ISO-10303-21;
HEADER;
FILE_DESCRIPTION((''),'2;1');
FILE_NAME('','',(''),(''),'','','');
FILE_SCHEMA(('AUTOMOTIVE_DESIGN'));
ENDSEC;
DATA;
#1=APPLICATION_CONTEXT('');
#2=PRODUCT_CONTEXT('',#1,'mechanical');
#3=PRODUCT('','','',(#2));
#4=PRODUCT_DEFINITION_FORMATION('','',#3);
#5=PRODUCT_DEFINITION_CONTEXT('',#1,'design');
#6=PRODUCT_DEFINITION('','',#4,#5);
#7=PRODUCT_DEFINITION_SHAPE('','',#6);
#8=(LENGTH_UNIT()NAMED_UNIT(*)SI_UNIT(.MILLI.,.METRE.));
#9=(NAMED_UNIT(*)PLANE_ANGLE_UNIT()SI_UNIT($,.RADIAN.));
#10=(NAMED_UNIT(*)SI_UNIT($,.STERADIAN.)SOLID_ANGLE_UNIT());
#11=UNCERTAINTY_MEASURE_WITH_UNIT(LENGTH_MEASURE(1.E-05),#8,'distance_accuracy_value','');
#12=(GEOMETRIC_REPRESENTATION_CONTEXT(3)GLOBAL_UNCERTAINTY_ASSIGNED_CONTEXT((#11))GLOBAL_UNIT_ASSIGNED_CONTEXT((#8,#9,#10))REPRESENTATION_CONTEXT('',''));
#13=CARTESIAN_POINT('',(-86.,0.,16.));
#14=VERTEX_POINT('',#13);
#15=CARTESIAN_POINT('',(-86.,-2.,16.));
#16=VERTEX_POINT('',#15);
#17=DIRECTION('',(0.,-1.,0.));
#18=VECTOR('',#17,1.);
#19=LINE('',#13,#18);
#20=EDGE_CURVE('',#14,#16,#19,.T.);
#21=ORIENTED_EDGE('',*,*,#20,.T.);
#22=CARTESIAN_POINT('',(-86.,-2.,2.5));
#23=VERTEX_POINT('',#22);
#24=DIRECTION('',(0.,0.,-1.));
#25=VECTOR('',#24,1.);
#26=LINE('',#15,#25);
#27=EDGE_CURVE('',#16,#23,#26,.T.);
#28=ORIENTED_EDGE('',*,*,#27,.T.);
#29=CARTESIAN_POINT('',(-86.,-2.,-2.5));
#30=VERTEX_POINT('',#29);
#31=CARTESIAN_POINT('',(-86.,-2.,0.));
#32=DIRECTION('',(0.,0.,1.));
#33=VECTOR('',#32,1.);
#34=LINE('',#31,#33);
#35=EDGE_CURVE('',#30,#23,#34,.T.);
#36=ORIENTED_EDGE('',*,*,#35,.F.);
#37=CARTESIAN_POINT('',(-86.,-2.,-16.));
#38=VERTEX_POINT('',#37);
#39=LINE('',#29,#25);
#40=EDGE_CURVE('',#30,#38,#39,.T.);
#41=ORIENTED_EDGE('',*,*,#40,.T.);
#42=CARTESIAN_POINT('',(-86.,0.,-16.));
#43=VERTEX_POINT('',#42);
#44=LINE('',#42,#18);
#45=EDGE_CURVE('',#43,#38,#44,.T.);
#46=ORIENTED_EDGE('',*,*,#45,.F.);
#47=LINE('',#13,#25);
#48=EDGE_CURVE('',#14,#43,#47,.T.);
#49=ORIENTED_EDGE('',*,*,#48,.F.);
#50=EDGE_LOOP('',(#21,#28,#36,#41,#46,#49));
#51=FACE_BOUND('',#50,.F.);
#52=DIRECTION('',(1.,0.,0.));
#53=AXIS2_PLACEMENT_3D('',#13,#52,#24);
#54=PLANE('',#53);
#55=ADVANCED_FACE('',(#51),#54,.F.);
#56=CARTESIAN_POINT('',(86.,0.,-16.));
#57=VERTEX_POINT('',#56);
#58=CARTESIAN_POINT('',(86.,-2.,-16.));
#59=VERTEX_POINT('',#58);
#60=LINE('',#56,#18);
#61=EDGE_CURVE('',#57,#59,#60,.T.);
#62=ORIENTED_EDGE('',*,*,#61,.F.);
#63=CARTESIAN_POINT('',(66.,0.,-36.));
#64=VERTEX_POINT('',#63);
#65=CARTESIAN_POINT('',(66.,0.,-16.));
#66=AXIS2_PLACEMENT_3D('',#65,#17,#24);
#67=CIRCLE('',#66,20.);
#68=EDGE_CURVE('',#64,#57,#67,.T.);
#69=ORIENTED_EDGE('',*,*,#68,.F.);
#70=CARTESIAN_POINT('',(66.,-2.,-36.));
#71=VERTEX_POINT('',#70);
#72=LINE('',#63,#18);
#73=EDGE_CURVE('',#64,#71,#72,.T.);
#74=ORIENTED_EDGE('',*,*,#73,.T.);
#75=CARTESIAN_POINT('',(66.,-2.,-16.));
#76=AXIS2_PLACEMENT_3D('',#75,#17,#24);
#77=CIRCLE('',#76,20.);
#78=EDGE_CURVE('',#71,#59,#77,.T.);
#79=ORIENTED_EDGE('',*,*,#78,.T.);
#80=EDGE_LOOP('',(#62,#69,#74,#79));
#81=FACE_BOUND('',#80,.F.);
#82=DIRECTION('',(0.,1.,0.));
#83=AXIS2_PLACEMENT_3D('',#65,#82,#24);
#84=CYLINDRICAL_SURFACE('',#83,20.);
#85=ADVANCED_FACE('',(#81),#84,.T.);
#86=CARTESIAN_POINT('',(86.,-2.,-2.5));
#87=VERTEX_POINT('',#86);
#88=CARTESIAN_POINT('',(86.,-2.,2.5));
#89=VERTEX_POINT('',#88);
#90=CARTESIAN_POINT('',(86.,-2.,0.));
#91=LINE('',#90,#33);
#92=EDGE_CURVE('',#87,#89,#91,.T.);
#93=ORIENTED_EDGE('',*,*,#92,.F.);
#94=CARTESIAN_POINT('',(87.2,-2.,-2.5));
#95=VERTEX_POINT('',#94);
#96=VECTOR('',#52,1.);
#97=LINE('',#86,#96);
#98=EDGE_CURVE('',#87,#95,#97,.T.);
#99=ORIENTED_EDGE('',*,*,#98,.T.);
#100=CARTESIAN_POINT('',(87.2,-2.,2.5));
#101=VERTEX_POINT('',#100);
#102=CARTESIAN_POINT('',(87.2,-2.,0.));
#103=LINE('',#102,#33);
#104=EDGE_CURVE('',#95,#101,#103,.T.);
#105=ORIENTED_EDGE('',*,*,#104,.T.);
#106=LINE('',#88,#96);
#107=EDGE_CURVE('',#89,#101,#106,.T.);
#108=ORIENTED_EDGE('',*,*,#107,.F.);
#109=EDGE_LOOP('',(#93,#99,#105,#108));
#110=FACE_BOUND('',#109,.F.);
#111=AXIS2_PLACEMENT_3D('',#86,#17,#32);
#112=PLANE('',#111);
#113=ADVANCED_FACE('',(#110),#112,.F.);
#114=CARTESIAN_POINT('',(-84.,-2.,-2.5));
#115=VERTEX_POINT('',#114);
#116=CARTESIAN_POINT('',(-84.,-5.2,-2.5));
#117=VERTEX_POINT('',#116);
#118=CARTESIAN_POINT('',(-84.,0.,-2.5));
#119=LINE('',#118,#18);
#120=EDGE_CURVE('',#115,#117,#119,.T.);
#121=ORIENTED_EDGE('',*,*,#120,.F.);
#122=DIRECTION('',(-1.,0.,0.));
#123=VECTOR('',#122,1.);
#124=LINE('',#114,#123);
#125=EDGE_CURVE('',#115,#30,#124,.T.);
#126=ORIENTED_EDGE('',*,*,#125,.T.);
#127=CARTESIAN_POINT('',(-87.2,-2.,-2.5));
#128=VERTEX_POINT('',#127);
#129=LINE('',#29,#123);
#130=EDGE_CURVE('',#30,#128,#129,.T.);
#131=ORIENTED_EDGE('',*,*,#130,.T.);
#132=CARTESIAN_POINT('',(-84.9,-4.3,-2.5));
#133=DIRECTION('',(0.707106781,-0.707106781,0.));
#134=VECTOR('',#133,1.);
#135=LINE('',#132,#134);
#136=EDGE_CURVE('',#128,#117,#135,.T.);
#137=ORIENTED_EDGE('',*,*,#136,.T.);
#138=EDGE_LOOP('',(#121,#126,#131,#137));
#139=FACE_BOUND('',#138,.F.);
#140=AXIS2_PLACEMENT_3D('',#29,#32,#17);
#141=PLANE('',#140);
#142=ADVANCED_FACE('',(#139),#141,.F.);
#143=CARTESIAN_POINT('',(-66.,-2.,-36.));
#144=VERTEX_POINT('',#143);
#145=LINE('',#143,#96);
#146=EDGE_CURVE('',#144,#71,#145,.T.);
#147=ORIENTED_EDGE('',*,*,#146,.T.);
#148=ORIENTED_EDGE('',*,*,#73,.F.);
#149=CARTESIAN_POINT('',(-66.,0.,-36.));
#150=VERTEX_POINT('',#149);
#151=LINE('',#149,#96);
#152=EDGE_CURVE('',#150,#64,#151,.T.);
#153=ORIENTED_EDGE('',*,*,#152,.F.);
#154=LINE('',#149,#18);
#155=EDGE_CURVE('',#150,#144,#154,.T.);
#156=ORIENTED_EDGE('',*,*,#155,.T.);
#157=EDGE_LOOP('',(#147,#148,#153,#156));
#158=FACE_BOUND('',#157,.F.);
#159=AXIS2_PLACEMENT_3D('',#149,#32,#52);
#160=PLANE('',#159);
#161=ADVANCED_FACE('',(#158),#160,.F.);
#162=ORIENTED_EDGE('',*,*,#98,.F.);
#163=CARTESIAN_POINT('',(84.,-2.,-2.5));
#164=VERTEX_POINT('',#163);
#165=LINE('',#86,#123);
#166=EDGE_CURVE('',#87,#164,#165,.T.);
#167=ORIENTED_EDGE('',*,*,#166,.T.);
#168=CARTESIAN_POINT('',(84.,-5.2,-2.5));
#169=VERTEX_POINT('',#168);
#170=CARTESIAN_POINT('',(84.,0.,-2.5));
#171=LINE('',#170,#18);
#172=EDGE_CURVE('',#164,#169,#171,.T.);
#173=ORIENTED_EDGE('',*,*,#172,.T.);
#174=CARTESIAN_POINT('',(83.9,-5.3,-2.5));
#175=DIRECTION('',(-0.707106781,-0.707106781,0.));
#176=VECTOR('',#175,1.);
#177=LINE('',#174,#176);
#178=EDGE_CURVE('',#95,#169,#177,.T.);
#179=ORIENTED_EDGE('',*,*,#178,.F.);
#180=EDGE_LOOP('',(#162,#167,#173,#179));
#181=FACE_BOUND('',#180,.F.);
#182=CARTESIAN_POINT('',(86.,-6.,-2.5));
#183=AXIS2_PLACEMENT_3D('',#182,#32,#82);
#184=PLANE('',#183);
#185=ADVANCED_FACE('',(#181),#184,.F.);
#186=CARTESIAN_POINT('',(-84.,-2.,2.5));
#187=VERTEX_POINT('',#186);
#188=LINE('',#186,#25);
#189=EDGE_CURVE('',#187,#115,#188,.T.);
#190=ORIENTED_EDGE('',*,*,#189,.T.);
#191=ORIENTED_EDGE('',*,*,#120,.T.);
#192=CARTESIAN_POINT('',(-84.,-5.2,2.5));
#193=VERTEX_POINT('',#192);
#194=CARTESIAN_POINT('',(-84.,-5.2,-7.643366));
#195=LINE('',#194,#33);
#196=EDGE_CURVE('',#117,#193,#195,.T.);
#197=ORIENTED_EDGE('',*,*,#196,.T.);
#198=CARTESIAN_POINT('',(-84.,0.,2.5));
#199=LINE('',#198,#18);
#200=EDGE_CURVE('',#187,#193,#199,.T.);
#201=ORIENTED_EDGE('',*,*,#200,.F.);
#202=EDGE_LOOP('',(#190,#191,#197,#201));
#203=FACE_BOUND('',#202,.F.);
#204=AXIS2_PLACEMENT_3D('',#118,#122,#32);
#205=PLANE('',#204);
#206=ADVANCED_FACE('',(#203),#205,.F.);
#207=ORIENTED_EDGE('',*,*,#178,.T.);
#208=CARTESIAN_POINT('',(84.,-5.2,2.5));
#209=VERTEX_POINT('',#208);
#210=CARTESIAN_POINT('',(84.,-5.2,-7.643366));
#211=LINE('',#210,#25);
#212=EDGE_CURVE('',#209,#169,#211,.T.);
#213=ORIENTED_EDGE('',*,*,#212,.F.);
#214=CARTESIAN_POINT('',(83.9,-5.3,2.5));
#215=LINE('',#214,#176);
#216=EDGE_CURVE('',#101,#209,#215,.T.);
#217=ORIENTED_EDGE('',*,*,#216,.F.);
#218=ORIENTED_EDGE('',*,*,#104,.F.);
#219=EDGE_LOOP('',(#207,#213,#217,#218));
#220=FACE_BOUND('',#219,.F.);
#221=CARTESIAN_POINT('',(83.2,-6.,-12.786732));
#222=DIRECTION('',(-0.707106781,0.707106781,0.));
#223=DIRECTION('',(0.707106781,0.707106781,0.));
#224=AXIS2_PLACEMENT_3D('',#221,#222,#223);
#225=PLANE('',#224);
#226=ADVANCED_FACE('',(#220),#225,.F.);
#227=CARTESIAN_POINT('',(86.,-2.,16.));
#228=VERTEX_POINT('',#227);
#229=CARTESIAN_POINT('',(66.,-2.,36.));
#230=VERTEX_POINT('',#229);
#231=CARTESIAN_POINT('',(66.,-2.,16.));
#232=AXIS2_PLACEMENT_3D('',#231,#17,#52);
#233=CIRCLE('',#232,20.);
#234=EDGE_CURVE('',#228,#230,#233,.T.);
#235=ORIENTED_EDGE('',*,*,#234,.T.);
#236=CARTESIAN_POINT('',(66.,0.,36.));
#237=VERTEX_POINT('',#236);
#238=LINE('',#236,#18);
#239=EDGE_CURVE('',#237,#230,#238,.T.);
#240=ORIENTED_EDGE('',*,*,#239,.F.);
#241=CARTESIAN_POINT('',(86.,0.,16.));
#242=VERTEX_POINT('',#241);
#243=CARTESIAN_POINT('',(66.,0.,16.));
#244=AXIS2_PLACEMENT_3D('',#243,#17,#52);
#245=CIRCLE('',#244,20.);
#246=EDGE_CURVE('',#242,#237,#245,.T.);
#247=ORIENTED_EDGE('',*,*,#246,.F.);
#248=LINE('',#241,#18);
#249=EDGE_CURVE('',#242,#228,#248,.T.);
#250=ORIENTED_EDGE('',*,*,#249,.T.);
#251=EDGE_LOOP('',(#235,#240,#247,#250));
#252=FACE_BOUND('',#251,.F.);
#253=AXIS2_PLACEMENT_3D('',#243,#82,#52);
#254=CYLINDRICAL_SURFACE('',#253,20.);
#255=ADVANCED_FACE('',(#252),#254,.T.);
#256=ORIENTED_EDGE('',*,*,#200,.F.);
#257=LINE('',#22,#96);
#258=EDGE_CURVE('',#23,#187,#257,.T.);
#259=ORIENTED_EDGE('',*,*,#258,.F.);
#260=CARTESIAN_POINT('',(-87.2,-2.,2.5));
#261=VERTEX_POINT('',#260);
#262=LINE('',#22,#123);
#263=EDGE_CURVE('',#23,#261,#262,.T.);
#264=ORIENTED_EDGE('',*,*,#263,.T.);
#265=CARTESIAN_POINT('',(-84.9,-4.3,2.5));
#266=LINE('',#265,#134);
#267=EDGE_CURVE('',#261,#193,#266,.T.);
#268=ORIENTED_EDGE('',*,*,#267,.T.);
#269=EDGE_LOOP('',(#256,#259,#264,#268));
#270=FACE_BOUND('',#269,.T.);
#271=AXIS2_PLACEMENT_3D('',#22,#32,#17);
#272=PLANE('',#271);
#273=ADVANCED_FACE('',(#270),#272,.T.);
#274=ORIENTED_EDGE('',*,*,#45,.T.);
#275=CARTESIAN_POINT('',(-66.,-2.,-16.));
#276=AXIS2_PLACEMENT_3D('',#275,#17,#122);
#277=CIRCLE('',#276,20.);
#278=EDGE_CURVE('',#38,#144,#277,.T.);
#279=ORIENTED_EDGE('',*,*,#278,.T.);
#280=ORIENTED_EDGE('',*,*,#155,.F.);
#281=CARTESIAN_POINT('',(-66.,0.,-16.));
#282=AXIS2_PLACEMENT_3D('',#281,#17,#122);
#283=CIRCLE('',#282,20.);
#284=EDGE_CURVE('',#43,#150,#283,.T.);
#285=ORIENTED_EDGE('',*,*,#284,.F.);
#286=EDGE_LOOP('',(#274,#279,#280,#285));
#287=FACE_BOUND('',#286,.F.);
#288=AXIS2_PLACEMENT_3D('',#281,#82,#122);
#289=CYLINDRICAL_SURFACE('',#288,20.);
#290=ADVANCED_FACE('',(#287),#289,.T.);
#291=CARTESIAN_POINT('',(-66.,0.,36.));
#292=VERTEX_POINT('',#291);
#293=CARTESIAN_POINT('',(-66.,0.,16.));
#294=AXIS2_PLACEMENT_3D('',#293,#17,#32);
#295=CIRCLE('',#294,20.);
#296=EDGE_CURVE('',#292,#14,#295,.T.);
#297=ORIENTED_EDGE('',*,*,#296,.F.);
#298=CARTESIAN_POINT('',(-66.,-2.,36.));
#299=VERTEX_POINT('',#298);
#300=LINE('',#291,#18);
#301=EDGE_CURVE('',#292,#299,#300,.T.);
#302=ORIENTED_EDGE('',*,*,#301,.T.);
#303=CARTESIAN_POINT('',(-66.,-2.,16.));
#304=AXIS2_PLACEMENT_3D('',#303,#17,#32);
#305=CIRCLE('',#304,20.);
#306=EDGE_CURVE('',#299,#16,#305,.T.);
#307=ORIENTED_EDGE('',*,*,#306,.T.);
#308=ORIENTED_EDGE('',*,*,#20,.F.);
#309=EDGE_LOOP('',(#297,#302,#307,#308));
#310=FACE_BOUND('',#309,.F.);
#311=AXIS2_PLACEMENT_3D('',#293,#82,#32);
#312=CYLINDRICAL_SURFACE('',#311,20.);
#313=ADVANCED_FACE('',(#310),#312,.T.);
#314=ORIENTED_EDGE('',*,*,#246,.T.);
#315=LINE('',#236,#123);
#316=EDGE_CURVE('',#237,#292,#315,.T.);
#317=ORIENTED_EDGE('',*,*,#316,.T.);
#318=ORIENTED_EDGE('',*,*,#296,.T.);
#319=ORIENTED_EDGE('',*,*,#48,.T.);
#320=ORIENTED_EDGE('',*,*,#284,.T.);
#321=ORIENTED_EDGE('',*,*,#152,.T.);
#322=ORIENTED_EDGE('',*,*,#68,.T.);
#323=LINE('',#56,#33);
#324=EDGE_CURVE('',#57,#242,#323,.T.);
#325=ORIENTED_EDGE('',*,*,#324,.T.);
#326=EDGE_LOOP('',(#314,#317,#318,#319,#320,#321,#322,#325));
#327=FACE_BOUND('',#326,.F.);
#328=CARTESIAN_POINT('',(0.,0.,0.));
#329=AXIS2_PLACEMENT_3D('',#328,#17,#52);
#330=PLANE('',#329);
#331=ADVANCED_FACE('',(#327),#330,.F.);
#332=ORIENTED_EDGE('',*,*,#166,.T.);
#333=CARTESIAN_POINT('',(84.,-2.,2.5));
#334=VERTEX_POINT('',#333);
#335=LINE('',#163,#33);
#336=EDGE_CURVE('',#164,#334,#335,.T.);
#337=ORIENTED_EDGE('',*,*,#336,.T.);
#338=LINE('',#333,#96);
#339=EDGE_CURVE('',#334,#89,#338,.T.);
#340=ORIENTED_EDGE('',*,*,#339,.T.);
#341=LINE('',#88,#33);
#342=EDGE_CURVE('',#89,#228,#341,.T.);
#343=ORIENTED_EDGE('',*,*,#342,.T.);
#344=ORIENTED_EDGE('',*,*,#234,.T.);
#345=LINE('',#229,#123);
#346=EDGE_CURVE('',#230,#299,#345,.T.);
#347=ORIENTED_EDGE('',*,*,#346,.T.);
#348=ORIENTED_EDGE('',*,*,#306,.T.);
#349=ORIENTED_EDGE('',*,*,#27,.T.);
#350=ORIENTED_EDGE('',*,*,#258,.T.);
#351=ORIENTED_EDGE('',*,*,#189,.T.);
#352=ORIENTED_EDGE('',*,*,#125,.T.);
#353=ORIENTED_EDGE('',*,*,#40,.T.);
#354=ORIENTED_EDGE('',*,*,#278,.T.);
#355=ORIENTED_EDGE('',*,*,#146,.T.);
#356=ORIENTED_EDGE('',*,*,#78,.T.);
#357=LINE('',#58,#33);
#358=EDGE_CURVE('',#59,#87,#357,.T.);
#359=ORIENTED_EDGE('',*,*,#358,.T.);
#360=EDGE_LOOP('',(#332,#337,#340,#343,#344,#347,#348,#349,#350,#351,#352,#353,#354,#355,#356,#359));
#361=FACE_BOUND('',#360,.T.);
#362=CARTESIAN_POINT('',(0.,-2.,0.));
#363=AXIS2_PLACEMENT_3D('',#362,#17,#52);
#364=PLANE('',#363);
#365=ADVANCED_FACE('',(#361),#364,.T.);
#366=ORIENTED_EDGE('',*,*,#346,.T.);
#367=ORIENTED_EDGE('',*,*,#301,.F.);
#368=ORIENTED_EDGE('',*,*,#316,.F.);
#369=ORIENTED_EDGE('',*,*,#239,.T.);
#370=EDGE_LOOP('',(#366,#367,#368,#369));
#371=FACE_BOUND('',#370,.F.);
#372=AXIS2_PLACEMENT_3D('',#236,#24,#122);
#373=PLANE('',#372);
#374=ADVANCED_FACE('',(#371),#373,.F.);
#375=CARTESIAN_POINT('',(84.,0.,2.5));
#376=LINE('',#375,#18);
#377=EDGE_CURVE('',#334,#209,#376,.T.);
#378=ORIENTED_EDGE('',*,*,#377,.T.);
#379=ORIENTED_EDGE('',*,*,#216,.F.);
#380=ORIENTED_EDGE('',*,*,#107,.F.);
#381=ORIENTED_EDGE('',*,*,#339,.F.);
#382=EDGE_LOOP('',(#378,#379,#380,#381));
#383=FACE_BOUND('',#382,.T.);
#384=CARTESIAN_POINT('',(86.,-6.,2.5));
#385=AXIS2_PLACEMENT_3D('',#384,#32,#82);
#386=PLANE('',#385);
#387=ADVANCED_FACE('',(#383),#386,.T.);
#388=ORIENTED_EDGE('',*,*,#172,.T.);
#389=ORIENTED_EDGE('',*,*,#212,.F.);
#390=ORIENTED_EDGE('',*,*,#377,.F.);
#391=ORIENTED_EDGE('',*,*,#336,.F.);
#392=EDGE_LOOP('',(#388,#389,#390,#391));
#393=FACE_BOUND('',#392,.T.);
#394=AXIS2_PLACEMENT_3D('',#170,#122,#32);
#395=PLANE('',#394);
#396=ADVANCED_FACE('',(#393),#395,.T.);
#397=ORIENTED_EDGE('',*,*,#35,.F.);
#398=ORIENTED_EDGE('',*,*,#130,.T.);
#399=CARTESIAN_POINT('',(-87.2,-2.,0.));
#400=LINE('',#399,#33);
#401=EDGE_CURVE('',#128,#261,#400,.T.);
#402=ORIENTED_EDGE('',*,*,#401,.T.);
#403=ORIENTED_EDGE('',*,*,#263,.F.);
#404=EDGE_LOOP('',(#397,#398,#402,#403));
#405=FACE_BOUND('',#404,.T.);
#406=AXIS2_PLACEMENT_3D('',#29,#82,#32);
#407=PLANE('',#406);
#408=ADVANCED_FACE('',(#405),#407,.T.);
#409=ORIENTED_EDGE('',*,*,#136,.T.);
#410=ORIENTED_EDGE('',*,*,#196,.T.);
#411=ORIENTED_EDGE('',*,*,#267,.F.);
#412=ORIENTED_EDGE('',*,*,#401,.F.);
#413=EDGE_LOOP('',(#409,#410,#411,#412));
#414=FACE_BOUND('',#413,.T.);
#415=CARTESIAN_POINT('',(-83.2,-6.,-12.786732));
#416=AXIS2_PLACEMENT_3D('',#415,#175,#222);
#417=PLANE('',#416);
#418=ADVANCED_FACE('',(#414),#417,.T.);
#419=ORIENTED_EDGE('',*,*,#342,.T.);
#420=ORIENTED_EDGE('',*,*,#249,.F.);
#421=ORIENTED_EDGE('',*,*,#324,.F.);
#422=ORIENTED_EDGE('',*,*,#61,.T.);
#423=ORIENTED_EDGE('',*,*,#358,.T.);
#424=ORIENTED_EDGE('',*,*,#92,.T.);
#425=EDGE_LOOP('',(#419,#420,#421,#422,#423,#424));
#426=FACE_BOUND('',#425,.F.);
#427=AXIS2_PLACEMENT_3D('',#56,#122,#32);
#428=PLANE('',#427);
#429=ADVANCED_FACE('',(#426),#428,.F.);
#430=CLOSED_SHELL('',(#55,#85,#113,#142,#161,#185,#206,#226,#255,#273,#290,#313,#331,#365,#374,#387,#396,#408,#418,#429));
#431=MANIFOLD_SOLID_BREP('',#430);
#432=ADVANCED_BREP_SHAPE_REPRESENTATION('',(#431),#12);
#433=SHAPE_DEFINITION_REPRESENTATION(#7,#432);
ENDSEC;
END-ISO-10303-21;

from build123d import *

# Parameters (mm, degrees)
F1_DEPTH    = 2
F0_W        = 2
F0_H        = 5
F2_DEPTH    = 6
F3_W        = 4
F3_H        = 5
F4_DEPTH    = 1.2
F5_W        = 4
F5_H        = 5
F6_DEPTH    = 1.2
F7_T1_DEPTH = 25.5734639037


# Not quite as in the source:
# - a fillet or chamfer that OpenCascade refuses, or shapes differently, is made with other operations: its cross-section is extruded or revolved along the edge and cut away or added


with BuildPart() as f1:
    # F0 (on Front) → F1 (new body)
    with BuildSketch(Plane.XZ):
        with BuildLine():
            ThreePointArc((86, 16), (80.1421356237, 30.1421356237), (66, 36))
            Line((66, 36), (-66, 36))
            ThreePointArc((-66, 36), (-80.1421356237, 30.1421356237), (-86, 16))
            Line((-86, 16), (-86, 2.5))
            Line((-86, 2.5), (-84, 2.5))
            Line((-84, 2.5), (-84, -2.5))
            Line((-84, -2.5), (-86, -2.5))
            Line((-86, -2.5), (-86, -16))
            ThreePointArc((-86, -16), (-80.1421356237, -30.1421356237), (-66, -36))
            Line((-66, -36), (66, -36))
            ThreePointArc((66, -36), (80.1421356237, -30.1421356237), (86, -16))
            Line((86, -16), (86, -2.5))
            Line((86, -2.5), (84, -2.5))
            Line((84, -2.5), (84, 2.5))
            Line((84, 2.5), (86, 2.5))
            Line((86, 2.5), (86, 16))
        make_face()
    extrude(amount=F1_DEPTH)

    # F0 (on Front) → F2 (join)
    with BuildSketch(Plane.XZ):
        with Locations((85, 0)):
            Rectangle(F0_W, F0_H)
        with Locations((-85, 0)):
            Rectangle(F0_W, F0_H)
    extrude(amount=F2_DEPTH)

    # F3 (on face) → F4 (join)
    with BuildSketch(Plane(origin=(-86, 0, 0), x_dir=(0, -1, 0), z_dir=(-1, 0, 0))):
        with Locations((4, 0)):
            Rectangle(F3_W, F3_H)
    extrude(amount=F4_DEPTH)

    # F5 (on face) → F6 (join)
    with BuildSketch(Plane.YZ.offset(86)):
        with Locations((-4, 0)):
            Rectangle(F5_W, F5_H)
    extrude(amount=F6_DEPTH)

    # F7: chamfer of 4 on 2 edges, made by hand

    # F7_s2 → F7_t1 (cut)
    with BuildSketch(Plane.XY.offset(-12.7867319519)):
        Polygon((83.2, -6), (87.2, -2), (87.2, -6), align=None)
        Polygon((-83.2, -6), (-87.2, -2), (-87.2, -6), align=None)
    extrude(amount=F7_T1_DEPTH, mode=Mode.SUBTRACT)


solid = f1.part
